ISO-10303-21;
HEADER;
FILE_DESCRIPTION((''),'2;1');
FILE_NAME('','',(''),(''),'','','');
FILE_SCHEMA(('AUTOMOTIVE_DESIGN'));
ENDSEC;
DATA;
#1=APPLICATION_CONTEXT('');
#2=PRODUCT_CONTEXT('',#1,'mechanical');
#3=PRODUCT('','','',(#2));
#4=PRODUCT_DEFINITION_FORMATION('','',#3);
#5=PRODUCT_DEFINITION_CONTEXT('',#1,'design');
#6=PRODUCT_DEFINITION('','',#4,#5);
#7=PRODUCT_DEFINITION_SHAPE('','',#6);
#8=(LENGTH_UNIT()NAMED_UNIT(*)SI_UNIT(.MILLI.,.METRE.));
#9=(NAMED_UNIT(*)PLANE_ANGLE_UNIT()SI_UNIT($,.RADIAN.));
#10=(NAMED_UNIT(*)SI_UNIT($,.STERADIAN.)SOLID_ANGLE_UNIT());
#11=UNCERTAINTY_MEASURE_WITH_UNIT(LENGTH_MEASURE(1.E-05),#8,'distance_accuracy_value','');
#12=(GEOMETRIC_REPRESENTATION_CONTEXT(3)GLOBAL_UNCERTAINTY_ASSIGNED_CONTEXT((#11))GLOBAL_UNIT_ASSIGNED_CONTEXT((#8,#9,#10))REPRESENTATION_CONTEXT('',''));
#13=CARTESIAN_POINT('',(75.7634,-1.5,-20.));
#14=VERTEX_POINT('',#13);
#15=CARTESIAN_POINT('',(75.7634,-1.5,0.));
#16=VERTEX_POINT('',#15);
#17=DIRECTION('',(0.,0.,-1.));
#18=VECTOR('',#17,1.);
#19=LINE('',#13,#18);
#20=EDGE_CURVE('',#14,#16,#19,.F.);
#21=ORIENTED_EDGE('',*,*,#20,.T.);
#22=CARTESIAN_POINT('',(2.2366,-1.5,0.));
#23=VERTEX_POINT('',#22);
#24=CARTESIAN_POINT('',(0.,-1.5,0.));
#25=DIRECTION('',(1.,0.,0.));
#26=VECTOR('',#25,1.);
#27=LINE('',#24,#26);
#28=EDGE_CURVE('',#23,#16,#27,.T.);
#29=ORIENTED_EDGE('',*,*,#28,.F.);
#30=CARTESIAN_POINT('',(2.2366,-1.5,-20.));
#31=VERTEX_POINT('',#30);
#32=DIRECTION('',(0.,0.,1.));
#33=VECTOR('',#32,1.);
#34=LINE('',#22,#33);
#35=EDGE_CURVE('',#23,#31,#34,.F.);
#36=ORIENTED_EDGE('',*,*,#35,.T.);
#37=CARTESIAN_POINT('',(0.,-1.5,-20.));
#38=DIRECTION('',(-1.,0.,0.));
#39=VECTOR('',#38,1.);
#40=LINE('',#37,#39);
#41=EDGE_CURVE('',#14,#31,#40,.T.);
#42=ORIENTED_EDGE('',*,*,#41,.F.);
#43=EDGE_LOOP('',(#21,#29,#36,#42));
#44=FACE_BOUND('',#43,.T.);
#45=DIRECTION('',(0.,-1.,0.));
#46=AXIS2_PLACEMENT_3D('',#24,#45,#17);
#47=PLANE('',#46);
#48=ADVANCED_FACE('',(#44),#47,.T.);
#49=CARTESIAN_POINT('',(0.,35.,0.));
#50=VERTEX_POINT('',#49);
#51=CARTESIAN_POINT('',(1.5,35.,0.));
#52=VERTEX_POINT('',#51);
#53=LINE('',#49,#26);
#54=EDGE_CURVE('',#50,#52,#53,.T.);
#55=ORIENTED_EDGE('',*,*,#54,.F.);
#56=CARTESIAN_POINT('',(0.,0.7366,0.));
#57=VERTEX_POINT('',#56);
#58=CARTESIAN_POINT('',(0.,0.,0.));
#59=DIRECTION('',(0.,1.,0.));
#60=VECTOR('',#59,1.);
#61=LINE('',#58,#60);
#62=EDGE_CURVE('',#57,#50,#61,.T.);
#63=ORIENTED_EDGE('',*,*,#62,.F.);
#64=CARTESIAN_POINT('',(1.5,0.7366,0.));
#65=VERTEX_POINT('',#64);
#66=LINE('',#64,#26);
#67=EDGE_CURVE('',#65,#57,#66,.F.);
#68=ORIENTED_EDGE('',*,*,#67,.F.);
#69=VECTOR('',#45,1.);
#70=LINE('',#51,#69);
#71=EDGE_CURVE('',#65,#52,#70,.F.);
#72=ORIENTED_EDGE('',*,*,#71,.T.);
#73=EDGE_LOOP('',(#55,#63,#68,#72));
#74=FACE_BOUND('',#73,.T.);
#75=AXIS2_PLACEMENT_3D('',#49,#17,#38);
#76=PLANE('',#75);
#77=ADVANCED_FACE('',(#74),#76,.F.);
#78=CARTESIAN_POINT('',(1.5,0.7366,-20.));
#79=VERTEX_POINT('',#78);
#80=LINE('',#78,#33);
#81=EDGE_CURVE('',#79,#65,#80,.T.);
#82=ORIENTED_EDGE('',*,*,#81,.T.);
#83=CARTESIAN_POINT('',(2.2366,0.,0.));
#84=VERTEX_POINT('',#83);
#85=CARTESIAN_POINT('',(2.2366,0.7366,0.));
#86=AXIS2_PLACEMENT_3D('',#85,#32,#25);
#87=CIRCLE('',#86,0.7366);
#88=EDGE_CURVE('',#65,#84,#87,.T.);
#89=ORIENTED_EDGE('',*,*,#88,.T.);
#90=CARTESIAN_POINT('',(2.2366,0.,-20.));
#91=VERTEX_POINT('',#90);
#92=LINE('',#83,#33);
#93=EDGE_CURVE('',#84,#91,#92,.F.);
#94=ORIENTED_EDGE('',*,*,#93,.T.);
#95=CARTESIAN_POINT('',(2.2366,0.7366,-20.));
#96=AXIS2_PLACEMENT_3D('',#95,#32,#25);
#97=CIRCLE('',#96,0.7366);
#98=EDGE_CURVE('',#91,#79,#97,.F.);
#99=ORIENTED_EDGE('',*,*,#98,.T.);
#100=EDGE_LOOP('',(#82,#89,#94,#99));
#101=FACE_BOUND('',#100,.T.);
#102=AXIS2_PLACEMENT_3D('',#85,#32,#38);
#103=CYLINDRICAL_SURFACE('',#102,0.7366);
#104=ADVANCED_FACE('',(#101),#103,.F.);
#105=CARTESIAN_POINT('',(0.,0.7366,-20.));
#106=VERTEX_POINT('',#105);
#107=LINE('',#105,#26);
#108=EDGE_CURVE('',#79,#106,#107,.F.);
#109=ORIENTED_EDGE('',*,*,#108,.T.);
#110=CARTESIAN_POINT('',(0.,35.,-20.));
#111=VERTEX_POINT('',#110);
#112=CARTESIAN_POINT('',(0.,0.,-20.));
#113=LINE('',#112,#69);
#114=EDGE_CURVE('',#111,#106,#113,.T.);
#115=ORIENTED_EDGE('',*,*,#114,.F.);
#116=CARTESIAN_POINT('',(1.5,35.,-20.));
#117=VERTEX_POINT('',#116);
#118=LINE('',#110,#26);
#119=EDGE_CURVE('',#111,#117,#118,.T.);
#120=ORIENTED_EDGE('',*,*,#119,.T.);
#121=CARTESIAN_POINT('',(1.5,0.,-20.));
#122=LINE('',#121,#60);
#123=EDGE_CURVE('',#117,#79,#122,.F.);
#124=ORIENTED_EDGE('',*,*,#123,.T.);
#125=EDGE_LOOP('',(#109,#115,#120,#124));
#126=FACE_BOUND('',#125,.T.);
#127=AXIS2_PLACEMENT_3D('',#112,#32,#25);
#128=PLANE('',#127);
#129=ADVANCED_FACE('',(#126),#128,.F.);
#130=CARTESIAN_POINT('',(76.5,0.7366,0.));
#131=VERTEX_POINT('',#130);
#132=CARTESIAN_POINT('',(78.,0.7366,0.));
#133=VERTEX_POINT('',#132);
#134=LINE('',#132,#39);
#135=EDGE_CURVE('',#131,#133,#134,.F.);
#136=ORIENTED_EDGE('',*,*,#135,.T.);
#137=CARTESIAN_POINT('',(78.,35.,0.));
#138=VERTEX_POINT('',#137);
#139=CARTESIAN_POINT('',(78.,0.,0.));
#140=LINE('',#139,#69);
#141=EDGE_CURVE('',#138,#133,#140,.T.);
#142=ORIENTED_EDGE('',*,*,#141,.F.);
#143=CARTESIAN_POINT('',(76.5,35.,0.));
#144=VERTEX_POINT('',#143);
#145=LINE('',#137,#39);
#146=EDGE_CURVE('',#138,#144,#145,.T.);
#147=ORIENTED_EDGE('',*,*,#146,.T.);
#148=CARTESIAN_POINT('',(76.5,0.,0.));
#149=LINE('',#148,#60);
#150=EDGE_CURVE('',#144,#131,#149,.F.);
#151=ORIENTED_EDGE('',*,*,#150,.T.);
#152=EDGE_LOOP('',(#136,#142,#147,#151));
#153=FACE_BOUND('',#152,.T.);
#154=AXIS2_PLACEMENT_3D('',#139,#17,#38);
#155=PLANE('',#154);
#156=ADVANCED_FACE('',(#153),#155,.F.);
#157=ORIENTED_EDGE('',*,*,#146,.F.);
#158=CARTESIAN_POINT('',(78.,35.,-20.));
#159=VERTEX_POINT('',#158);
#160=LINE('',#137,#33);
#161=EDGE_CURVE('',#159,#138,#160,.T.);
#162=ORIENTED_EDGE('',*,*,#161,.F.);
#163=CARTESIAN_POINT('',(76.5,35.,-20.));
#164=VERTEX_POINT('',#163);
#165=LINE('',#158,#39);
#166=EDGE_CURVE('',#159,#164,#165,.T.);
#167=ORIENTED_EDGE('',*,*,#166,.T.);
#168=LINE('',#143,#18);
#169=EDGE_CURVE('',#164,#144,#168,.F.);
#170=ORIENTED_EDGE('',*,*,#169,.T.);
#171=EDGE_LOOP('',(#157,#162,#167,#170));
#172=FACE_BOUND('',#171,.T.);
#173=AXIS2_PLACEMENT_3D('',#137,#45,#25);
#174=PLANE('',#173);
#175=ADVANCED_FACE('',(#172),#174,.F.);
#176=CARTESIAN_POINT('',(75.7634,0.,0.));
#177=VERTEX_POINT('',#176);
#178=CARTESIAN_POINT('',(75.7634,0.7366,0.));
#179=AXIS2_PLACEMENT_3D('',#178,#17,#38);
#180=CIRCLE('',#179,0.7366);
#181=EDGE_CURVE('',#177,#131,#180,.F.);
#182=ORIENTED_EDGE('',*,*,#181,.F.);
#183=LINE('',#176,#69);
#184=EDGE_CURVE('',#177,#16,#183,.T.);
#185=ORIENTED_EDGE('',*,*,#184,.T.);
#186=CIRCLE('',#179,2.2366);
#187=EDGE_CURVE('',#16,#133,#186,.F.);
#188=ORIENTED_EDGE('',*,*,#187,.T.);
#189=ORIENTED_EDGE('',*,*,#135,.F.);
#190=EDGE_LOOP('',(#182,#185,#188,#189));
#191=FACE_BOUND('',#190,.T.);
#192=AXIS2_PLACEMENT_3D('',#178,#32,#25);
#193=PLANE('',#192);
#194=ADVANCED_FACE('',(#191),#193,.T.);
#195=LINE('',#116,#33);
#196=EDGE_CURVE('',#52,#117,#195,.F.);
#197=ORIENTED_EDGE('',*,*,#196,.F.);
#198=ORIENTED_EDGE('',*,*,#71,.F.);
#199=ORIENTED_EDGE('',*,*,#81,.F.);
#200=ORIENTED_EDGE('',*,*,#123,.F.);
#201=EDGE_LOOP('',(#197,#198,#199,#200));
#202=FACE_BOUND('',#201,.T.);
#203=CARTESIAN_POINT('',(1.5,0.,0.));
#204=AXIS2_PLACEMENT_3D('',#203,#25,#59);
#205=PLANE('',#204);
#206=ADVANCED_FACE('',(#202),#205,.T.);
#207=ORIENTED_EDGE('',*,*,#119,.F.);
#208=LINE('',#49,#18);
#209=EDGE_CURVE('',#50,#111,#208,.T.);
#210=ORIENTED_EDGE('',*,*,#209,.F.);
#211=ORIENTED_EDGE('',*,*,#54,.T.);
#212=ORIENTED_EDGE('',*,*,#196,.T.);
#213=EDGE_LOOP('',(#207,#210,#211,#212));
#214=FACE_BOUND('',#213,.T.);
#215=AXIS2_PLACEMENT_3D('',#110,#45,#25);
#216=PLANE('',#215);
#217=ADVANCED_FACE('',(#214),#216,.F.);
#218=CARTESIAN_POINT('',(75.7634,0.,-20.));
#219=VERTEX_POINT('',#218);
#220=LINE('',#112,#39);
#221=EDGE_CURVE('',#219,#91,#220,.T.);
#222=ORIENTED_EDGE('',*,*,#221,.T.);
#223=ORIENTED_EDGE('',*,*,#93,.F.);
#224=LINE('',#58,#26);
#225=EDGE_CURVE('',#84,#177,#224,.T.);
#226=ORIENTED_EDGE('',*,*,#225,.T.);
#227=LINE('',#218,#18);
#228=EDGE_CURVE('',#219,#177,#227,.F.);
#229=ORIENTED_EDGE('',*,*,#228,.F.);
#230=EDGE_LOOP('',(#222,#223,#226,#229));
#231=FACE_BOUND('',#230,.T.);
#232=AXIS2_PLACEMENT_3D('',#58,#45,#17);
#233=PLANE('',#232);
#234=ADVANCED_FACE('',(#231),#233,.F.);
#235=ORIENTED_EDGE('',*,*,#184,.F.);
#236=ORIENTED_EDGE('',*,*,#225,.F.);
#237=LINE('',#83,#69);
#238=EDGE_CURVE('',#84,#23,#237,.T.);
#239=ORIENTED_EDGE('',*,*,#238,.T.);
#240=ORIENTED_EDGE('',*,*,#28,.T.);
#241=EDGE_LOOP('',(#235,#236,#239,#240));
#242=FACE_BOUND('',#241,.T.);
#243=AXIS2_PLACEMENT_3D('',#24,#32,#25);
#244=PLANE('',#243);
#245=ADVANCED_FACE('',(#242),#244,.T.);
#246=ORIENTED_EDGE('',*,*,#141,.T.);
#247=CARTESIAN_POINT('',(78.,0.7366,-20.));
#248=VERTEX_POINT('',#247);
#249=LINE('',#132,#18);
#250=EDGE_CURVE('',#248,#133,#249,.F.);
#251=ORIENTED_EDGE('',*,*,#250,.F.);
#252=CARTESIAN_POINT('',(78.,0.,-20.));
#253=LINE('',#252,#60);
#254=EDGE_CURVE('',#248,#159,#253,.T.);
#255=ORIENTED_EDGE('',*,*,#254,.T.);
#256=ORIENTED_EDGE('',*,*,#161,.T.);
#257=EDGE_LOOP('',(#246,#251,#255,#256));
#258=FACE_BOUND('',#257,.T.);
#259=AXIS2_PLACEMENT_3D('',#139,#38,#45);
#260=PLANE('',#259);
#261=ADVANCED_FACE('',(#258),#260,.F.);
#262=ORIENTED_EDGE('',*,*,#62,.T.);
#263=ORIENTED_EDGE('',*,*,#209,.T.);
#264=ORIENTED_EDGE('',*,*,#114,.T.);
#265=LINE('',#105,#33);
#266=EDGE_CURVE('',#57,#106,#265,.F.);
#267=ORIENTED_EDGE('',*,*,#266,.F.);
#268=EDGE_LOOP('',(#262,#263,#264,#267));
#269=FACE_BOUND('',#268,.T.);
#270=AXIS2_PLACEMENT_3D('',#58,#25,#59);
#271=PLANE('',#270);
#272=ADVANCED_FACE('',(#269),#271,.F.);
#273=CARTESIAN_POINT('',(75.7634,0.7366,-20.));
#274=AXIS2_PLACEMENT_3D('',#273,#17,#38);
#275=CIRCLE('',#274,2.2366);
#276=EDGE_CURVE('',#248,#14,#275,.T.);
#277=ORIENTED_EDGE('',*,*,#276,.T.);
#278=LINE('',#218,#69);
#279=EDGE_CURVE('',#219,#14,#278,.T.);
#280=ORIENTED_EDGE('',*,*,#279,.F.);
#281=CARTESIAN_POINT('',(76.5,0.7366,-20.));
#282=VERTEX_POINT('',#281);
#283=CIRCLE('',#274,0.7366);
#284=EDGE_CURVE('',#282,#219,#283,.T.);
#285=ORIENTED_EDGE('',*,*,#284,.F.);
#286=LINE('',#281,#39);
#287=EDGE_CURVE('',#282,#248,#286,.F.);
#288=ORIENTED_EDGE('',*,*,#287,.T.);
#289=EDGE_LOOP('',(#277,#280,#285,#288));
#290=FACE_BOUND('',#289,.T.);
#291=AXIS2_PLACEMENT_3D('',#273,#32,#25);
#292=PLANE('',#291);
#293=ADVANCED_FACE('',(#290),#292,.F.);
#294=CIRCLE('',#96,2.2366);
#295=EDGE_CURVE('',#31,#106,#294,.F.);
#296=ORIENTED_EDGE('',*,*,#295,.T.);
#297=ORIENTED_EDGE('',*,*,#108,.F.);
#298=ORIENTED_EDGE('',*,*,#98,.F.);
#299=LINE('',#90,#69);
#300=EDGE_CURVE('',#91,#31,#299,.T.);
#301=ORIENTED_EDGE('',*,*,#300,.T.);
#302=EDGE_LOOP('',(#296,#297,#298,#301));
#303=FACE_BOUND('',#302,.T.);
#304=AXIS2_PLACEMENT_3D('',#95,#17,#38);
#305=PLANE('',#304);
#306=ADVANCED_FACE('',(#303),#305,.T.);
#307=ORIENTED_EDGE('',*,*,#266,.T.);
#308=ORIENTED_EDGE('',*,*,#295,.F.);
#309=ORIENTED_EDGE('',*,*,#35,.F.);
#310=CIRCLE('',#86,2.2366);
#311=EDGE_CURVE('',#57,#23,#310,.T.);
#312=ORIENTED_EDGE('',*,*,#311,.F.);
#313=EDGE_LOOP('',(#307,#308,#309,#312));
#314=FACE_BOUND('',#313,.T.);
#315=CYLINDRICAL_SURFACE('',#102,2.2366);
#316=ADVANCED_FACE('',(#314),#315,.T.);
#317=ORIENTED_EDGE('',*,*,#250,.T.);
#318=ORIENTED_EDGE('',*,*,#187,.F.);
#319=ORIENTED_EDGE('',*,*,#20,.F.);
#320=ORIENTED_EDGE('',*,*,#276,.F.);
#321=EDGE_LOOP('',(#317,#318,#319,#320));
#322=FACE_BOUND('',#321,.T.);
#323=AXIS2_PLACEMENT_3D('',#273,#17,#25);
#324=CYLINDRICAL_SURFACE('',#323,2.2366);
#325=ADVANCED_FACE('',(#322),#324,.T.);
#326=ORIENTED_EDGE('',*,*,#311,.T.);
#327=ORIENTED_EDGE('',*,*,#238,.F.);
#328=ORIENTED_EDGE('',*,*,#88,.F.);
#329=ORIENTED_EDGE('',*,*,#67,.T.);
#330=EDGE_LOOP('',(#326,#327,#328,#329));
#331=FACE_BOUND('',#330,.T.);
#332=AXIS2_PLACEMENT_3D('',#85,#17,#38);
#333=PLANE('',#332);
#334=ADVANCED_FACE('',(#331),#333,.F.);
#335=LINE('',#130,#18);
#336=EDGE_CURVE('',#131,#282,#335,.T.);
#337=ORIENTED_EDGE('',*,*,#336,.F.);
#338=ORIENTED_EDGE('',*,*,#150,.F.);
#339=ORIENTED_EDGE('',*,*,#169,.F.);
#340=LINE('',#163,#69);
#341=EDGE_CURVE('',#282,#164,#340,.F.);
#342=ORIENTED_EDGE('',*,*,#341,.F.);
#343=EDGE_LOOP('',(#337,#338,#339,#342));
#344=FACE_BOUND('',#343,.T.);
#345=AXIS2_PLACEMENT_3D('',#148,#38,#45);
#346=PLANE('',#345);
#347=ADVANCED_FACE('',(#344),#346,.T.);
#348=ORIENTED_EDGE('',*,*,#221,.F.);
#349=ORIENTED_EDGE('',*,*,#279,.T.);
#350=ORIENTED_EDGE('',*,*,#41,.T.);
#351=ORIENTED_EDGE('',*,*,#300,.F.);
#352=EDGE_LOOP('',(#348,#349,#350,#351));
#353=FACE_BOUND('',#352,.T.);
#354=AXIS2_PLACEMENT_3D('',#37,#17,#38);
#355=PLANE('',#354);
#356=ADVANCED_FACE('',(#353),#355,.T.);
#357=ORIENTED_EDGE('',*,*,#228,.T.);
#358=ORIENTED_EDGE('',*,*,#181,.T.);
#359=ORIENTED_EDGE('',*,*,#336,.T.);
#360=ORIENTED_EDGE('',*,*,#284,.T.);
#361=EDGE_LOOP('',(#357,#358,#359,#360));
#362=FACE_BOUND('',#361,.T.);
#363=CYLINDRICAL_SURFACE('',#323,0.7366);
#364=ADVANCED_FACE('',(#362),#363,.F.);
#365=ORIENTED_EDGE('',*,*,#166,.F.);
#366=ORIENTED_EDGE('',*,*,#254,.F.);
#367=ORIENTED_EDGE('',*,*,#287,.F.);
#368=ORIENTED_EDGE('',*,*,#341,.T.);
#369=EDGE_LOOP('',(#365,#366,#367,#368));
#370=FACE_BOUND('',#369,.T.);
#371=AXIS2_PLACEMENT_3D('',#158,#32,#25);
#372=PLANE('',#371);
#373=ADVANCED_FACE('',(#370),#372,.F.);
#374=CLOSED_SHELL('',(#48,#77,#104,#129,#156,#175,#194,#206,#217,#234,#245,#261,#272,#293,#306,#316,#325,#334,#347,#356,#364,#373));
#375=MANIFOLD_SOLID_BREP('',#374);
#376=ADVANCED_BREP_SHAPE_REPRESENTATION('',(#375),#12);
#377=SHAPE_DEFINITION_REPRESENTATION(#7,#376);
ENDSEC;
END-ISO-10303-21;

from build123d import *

# Parameters (mm, degrees)
SKETCH_1_W                       = 78
SKETCH_1_H                       = 20
SM_BASE_FLANGE_1_DEPTH           = 1.5
SM_EDGE_FLANGE_1_STRIP_W         = 7.4732
SM_EDGE_FLANGE_1_STRIP_H         = 1.5
SM_EDGE_FLANGE_1_STRIP_CUT_DEPTH = 20
SM_EDGE_FLANGE_1_DEPTH           = 20
SM_EDGE_FLANGE_2_STRIP_W         = 7.4732
SM_EDGE_FLANGE_2_STRIP_H         = 1.5
SM_EDGE_FLANGE_2_STRIP_CUT_DEPTH = 20
SM_EDGE_FLANGE_2_DEPTH           = 20


# Sheet-metal steps are written as plain solids
with BuildPart() as part:
    # Sketch 1 → Базовая кромка1 (new body)
    with BuildSketch(Plane(origin=(0, 0, 0), x_dir=(1, 0, 0), z_dir=(0, 1, 0))):
        with Locations((39, 10)):
            Rectangle(SKETCH_1_W, SKETCH_1_H)
    extrude(amount=-SM_BASE_FLANGE_1_DEPTH)

    # Ребро-кромка1 strip (across the edge) → Ребро-кромка1 strip cut (cut)
    with BuildSketch(Plane.XY.offset(-20)):
        with Locations((-1.5, -0.75)):
            Rectangle(SM_EDGE_FLANGE_1_STRIP_W, SM_EDGE_FLANGE_1_STRIP_H)
    extrude(amount=SM_EDGE_FLANGE_1_STRIP_CUT_DEPTH, mode=Mode.SUBTRACT)

    # Ребро-кромка1 section (across the edge) → Ребро-кромка1 (add)
    with BuildSketch(Plane.XY.offset(-20)):
        with BuildLine():
            Line((0, 0.7366), (0, 35))
            Line((0, 35), (1.5, 35))
            Line((1.5, 35), (1.5, 0.7366))
            ThreePointArc((1.5, 0.7366), (1.715745145, 0.215745145), (2.2366, 0))
            Line((2.2366, 0), (2.2366, -1.5))
            ThreePointArc((2.2366, -1.5), (0.655084973, -0.844915027), (0, 0.7366))
        make_face()
    extrude(amount=SM_EDGE_FLANGE_1_DEPTH)

    # Ребро-кромка2 strip (across the edge) → Ребро-кромка2 strip cut (cut)
    with BuildSketch(Plane(origin=(78, 0, 0), x_dir=(-1, 0, 0), z_dir=(0, 0, -1))):
        with Locations((-1.5, -0.75)):
            Rectangle(SM_EDGE_FLANGE_2_STRIP_W, SM_EDGE_FLANGE_2_STRIP_H)
    extrude(amount=SM_EDGE_FLANGE_2_STRIP_CUT_DEPTH, mode=Mode.SUBTRACT)

    # Ребро-кромка2 section (across the edge) → Ребро-кромка2 (add)
    with BuildSketch(Plane(origin=(78, 0, 0), x_dir=(-1, 0, 0), z_dir=(0, 0, -1))):
        with BuildLine():
            Line((0, 0.7366), (0, 35))
            Line((0, 35), (1.5, 35))
            Line((1.5, 35), (1.5, 0.7366))
            ThreePointArc((1.5, 0.7366), (1.715745145, 0.215745145), (2.2366, 0))
            Line((2.2366, 0), (2.2366, -1.5))
            ThreePointArc((2.2366, -1.5), (0.655084973, -0.844915027), (0, 0.7366))
        make_face()
    extrude(amount=SM_EDGE_FLANGE_2_DEPTH)


solid = part.part
